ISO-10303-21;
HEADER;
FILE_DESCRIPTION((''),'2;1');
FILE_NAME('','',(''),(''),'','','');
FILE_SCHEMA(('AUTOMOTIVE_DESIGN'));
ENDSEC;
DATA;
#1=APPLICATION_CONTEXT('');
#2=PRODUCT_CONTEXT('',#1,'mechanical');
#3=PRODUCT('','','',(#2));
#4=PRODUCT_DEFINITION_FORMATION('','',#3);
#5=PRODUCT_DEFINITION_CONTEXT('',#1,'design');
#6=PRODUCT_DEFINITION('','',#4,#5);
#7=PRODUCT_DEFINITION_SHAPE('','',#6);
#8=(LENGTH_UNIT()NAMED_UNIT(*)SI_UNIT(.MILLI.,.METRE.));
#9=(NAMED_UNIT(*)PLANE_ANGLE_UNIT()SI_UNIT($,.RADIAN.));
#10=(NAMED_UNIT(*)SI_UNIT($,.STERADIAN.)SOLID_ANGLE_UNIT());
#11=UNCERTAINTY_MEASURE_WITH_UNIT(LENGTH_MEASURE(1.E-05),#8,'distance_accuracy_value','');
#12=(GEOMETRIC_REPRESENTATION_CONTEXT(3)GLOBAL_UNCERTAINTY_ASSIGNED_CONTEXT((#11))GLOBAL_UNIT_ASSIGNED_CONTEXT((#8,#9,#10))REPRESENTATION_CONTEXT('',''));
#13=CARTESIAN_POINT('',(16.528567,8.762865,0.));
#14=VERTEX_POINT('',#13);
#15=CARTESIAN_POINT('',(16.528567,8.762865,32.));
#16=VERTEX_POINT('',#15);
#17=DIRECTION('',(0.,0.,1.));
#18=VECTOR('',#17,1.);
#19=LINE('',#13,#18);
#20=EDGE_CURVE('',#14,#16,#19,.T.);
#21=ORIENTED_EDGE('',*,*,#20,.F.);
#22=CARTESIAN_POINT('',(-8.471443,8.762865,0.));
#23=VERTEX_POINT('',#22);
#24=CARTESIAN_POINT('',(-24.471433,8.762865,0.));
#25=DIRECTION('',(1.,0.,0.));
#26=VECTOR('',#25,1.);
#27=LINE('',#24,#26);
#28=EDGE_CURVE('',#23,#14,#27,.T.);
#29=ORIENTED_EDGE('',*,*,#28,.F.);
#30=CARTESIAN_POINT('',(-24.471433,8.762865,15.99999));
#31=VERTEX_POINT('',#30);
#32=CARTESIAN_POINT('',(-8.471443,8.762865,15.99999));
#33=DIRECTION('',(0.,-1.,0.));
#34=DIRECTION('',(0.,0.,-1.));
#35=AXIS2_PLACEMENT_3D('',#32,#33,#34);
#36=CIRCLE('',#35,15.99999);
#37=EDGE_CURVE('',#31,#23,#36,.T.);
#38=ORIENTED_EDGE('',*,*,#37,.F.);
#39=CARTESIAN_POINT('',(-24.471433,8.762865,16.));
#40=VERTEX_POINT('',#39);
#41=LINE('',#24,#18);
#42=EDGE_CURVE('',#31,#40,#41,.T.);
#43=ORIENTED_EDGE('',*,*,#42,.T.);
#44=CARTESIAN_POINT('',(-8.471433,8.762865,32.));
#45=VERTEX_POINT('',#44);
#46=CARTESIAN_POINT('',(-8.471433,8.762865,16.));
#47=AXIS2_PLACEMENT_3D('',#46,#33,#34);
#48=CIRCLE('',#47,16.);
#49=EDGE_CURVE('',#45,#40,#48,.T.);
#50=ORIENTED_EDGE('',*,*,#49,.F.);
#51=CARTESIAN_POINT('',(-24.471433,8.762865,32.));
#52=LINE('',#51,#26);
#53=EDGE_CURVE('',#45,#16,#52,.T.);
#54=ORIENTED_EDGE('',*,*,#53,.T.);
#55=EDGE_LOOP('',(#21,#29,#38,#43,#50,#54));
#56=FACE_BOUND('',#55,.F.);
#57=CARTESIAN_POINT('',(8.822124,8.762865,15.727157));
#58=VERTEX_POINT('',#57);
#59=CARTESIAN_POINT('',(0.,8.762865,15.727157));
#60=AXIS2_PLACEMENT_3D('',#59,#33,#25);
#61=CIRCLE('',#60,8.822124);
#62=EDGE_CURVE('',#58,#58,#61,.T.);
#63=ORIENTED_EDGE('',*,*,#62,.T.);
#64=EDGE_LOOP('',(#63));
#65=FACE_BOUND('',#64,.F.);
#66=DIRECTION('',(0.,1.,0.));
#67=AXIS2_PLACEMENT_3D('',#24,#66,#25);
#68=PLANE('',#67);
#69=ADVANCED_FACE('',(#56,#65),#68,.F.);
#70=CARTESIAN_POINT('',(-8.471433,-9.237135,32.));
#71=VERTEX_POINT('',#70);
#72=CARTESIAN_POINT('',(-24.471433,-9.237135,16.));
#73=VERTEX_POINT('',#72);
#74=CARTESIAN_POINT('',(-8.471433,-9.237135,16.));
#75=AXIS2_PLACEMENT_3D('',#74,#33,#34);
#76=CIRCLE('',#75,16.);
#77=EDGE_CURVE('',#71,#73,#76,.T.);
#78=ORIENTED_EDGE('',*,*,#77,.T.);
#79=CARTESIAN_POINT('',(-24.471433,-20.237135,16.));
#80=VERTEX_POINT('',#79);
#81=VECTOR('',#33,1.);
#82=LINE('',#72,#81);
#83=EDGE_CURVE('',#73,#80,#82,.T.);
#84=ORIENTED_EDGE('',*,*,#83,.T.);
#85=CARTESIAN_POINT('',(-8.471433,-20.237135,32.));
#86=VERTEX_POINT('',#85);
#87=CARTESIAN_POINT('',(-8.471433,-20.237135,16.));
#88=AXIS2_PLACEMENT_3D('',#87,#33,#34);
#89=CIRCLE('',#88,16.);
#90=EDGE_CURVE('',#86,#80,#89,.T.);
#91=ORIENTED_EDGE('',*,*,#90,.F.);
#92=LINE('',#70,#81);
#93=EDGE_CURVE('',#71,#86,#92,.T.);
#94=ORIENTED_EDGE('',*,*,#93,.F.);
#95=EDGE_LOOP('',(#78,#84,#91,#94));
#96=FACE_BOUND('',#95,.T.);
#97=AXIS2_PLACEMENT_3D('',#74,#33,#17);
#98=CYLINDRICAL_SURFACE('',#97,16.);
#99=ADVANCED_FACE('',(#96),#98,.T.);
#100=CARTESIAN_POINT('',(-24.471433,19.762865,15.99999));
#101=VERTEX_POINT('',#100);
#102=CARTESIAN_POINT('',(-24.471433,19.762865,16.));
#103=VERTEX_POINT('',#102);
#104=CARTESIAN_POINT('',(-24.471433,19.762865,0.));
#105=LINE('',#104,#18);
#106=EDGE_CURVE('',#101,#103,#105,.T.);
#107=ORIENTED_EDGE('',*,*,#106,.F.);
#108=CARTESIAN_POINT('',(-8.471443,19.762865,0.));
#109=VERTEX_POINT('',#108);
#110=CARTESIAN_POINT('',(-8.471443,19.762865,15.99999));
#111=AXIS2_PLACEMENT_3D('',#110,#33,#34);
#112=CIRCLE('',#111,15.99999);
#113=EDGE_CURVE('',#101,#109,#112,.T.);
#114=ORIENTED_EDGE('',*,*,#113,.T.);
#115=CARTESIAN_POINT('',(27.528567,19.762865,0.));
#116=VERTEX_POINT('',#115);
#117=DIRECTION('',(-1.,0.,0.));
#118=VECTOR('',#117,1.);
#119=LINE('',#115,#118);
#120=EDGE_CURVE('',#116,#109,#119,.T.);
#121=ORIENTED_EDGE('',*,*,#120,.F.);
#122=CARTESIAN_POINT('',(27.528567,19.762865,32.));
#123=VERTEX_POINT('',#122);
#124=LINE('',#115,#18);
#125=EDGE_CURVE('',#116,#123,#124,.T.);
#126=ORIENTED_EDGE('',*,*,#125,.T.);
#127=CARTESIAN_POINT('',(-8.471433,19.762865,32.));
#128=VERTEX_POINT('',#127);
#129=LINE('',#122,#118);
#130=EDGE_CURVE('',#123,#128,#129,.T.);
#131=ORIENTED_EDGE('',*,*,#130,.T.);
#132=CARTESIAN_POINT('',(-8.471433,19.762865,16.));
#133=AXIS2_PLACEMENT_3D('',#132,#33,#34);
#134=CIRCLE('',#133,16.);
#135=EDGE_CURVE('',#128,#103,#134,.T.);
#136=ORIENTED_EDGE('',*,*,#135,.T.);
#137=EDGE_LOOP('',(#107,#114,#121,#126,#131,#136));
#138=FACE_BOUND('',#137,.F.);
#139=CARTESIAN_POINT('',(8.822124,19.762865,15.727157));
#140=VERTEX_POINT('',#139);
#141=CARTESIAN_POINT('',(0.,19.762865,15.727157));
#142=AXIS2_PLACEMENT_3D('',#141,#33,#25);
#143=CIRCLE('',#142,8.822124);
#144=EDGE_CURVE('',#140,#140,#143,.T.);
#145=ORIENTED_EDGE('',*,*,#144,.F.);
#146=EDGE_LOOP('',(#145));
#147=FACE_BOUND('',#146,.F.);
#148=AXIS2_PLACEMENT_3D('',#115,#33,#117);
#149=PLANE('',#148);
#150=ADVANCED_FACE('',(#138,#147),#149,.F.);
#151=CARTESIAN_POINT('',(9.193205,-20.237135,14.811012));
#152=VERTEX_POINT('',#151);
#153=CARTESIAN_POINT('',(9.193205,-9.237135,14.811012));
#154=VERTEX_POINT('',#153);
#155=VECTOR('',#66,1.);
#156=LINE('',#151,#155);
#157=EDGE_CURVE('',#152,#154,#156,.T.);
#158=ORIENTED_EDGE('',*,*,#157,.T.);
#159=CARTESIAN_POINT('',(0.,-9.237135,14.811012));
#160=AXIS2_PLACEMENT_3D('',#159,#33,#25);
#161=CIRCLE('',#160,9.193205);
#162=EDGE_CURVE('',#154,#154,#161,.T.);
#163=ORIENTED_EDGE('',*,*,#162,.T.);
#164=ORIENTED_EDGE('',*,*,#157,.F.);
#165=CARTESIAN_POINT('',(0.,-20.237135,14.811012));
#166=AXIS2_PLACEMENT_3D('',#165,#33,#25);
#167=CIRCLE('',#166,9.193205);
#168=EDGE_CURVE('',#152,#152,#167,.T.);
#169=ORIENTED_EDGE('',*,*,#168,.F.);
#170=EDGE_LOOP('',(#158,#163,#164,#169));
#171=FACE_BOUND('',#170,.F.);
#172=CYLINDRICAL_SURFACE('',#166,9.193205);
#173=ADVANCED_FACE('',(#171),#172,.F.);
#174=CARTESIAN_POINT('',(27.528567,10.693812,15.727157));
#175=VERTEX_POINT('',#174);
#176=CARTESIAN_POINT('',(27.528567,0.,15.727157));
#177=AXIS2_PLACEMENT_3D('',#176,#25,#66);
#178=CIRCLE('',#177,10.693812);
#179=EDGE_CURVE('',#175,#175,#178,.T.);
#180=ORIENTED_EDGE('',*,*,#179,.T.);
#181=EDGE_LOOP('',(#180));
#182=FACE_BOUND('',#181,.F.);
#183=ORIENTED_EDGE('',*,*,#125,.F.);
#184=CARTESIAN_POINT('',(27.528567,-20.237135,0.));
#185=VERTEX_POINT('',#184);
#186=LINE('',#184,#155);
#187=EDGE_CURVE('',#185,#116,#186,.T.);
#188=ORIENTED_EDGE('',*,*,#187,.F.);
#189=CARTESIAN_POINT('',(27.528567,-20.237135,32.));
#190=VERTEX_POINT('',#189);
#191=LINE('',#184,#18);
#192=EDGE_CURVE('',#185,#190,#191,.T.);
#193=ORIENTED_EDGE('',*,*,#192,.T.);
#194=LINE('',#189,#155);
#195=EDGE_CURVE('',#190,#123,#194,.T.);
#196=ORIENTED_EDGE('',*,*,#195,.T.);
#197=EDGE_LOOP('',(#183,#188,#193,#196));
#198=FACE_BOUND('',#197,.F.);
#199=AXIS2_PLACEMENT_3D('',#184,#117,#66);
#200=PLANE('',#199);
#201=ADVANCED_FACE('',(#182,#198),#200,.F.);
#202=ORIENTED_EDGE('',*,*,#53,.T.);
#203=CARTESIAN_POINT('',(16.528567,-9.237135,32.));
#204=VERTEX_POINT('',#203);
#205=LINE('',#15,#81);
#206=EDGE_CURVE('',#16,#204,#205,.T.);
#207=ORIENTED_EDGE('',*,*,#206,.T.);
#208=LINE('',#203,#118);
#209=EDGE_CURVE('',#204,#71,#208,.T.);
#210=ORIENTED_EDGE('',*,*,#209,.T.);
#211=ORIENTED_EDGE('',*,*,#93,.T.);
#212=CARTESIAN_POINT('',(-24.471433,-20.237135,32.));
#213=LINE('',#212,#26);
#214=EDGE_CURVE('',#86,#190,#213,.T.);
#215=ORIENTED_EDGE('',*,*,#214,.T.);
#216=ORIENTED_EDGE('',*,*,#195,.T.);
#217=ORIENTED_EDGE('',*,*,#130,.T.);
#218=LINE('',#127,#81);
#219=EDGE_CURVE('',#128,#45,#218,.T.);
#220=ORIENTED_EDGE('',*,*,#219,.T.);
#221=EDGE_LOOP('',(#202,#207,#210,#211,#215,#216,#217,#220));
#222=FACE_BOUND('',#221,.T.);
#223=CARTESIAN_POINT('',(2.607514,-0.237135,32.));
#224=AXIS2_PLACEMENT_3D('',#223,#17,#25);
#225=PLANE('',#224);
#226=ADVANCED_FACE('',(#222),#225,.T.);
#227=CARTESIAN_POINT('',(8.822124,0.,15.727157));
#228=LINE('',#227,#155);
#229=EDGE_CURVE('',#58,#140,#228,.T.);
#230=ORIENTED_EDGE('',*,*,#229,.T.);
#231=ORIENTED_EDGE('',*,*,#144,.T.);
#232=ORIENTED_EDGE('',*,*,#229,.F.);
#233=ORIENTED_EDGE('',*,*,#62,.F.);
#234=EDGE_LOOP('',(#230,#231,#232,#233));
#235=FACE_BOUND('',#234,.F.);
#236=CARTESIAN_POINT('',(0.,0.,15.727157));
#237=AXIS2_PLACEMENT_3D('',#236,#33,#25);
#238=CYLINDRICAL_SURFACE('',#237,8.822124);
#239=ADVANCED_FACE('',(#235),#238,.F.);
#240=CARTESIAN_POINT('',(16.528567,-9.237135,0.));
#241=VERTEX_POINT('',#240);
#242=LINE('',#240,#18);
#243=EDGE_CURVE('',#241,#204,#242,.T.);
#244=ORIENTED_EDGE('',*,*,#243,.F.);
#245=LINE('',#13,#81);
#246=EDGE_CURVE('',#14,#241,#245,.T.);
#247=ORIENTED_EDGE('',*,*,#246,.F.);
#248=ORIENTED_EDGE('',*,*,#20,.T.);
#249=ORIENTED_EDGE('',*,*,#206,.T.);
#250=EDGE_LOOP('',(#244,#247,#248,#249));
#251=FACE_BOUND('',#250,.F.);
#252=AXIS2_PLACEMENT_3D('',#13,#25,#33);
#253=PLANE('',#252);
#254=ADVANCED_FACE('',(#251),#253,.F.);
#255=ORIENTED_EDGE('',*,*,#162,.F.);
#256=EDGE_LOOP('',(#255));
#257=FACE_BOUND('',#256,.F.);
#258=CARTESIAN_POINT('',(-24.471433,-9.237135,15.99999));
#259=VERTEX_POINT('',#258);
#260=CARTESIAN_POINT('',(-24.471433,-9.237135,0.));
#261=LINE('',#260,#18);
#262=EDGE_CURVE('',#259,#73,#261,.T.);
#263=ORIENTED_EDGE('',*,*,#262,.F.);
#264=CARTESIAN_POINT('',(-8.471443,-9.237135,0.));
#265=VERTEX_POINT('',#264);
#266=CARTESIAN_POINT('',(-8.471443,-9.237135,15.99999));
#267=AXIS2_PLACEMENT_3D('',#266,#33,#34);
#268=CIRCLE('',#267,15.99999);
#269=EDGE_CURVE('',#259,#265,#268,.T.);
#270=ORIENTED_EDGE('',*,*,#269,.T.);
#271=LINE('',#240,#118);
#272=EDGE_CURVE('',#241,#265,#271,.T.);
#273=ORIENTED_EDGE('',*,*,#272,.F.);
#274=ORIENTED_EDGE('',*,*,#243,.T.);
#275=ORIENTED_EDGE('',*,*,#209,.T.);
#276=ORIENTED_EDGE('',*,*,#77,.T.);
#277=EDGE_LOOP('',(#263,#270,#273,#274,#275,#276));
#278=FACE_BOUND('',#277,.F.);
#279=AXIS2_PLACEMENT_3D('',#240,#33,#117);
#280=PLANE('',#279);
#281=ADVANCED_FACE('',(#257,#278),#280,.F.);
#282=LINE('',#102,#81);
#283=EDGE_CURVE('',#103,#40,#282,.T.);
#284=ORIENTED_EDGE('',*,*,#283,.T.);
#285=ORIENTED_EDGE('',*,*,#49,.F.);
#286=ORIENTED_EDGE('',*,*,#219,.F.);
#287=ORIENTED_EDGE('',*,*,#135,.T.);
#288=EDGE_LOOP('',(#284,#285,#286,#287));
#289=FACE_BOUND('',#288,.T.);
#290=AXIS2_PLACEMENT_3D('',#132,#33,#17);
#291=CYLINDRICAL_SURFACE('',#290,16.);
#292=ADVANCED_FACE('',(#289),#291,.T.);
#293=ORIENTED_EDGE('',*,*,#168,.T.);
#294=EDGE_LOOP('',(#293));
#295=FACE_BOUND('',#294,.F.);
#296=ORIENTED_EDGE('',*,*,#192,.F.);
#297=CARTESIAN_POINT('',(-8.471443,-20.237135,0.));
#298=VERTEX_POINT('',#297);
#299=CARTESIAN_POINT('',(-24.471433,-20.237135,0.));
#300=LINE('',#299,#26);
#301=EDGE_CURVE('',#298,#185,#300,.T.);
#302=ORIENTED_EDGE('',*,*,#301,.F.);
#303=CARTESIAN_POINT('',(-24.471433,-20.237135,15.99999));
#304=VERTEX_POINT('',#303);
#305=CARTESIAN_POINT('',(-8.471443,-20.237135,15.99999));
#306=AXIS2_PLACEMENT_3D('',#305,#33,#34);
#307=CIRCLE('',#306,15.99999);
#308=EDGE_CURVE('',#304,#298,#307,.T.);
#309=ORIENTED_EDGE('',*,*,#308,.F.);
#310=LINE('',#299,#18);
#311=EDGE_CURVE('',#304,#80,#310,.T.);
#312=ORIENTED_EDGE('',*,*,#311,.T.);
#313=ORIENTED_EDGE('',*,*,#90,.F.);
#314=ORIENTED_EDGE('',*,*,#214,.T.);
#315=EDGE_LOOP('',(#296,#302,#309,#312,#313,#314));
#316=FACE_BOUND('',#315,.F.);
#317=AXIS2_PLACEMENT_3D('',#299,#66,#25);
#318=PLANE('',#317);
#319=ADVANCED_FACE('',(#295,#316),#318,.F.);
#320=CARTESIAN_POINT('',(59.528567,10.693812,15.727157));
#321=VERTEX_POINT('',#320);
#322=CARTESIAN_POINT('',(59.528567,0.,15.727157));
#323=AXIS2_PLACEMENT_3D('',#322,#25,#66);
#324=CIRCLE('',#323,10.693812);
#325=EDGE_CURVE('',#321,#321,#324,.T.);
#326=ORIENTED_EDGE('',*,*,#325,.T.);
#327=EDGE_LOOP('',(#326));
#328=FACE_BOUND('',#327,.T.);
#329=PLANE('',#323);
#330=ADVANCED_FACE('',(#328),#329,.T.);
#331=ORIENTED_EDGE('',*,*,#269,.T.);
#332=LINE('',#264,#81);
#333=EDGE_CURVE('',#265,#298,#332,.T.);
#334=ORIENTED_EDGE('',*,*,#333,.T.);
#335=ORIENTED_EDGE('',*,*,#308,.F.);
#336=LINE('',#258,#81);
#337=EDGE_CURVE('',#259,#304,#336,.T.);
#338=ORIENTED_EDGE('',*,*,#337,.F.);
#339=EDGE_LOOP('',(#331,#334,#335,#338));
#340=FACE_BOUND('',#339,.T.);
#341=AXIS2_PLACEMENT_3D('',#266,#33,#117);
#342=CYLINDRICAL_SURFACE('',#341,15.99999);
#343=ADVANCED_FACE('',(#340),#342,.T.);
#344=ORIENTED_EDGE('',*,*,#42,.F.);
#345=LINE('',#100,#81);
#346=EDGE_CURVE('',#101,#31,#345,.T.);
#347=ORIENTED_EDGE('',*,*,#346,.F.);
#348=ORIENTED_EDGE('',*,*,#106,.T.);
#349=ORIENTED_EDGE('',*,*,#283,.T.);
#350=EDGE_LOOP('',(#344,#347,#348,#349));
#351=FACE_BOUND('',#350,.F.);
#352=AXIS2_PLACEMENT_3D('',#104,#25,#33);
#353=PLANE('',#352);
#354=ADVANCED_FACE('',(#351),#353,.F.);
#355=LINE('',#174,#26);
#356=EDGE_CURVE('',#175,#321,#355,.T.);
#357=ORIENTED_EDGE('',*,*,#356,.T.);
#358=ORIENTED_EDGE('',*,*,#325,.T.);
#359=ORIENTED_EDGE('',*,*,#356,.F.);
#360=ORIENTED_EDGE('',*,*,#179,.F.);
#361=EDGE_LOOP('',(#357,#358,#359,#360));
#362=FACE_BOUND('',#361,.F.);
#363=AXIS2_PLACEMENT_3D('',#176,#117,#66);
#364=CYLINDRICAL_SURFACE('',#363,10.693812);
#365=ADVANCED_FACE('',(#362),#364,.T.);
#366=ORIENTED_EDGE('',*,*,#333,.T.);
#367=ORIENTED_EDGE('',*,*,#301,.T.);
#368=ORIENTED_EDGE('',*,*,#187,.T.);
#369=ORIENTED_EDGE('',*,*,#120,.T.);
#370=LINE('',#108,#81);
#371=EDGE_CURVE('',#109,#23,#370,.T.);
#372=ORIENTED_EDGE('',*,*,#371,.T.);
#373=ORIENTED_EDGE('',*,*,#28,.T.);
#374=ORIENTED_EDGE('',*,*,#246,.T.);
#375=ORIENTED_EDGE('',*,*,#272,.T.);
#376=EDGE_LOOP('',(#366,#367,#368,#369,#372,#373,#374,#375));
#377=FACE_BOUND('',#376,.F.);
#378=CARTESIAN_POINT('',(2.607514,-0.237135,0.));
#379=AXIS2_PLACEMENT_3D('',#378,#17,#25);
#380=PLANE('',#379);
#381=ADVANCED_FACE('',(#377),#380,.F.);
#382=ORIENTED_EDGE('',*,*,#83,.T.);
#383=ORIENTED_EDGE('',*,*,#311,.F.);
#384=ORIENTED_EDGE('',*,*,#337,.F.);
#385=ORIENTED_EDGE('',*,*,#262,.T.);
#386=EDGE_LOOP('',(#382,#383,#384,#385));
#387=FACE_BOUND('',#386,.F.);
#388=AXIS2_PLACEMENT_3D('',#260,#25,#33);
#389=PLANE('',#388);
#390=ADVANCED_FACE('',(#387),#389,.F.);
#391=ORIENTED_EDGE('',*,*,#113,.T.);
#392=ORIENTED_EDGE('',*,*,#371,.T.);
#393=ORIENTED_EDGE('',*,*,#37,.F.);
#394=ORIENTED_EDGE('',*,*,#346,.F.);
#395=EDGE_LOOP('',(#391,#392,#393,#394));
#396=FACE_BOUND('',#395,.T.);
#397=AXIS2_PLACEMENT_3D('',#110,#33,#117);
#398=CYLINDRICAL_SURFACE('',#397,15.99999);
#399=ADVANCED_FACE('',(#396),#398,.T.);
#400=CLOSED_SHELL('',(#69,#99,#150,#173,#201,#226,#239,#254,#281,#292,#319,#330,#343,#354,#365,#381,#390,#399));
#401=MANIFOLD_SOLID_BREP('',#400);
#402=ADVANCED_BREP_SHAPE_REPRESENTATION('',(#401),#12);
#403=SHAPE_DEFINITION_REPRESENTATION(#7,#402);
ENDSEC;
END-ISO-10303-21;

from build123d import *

# Parameters (mm, degrees)
F1_DEPTH  = 32
F2_R      = 9.193205317
F4_DEPTH  = 11
F3_R      = 8.8221237906
F5_DEPTH  = 50.8
F6_R      = 16
F7_R      = 15.99999
F8_R      = 16
F9_R      = 15.99999
F10_R     = 10.6938119657
F11_DEPTH = 32


# Not quite as in the source:
# - a fillet or chamfer is up to 0.001 mm smaller than in the source, because OpenCascade refuses the exact size


with BuildPart() as f1:
    # F0 (on Top) → F1 (new body)
    with BuildSketch(Plane.XY):
        Polygon((16.5285665829, 19.762864985), (-24.4714334171, 19.762864985), (-24.4714334171, 8.762864985), (16.5285665829, 8.762864985), (16.5285665829, -9.237135015), (-24.4714334171, -9.237135015), (-24.4714334171, -20.237135015), (27.5285665829, -20.237135015), (27.5285665829, 19.762864985), align=None)
    extrude(amount=F1_DEPTH)

    # F2 (on face) → F4 (cut)
    with BuildSketch(Plane.XZ.offset(20.237135015)):
        with Locations((0, 14.8110119626)):
            Circle(F2_R)
    extrude(amount=-F4_DEPTH, mode=Mode.SUBTRACT)

    # F3 (on Front) → F5 (cut)
    with BuildSketch(Plane.XZ):
        with Locations((0, 15.7271567732)):
            Circle(F3_R)
    extrude(amount=-F5_DEPTH, mode=Mode.SUBTRACT)

    # F6
    f6_edges = [f1.edges().sort_by_distance(p)[0] for p in [
        (-24.471433, -14.737135, 32),
    ]]
    fillet(f6_edges, radius=F6_R)

    # F7 (radius 16 in the source; OpenCascade refuses exactly that, so slightly less here)
    f7_edges = [f1.edges().sort_by_distance(p)[0] for p in [
        (-24.471433, -14.737135, 0),
    ]]
    fillet(f7_edges, radius=F7_R)

    # F8
    f8_edges = [f1.edges().sort_by_distance(p)[0] for p in [
        (-24.471433, 14.262865, 32),
    ]]
    fillet(f8_edges, radius=F8_R)

    # F9 (radius 16 in the source; OpenCascade refuses exactly that, so slightly less here)
    f9_edges = [f1.edges().sort_by_distance(p)[0] for p in [
        (-24.471433, 14.262865, 0),
    ]]
    fillet(f9_edges, radius=F9_R)

    # F10 (on face) → F11 (join)
    with BuildSketch(Plane.YZ.offset(27.5285665829)):
        with Locations((0, 15.7271567732)):
            Circle(F10_R)
    extrude(amount=F11_DEPTH)


solid = f1.part
